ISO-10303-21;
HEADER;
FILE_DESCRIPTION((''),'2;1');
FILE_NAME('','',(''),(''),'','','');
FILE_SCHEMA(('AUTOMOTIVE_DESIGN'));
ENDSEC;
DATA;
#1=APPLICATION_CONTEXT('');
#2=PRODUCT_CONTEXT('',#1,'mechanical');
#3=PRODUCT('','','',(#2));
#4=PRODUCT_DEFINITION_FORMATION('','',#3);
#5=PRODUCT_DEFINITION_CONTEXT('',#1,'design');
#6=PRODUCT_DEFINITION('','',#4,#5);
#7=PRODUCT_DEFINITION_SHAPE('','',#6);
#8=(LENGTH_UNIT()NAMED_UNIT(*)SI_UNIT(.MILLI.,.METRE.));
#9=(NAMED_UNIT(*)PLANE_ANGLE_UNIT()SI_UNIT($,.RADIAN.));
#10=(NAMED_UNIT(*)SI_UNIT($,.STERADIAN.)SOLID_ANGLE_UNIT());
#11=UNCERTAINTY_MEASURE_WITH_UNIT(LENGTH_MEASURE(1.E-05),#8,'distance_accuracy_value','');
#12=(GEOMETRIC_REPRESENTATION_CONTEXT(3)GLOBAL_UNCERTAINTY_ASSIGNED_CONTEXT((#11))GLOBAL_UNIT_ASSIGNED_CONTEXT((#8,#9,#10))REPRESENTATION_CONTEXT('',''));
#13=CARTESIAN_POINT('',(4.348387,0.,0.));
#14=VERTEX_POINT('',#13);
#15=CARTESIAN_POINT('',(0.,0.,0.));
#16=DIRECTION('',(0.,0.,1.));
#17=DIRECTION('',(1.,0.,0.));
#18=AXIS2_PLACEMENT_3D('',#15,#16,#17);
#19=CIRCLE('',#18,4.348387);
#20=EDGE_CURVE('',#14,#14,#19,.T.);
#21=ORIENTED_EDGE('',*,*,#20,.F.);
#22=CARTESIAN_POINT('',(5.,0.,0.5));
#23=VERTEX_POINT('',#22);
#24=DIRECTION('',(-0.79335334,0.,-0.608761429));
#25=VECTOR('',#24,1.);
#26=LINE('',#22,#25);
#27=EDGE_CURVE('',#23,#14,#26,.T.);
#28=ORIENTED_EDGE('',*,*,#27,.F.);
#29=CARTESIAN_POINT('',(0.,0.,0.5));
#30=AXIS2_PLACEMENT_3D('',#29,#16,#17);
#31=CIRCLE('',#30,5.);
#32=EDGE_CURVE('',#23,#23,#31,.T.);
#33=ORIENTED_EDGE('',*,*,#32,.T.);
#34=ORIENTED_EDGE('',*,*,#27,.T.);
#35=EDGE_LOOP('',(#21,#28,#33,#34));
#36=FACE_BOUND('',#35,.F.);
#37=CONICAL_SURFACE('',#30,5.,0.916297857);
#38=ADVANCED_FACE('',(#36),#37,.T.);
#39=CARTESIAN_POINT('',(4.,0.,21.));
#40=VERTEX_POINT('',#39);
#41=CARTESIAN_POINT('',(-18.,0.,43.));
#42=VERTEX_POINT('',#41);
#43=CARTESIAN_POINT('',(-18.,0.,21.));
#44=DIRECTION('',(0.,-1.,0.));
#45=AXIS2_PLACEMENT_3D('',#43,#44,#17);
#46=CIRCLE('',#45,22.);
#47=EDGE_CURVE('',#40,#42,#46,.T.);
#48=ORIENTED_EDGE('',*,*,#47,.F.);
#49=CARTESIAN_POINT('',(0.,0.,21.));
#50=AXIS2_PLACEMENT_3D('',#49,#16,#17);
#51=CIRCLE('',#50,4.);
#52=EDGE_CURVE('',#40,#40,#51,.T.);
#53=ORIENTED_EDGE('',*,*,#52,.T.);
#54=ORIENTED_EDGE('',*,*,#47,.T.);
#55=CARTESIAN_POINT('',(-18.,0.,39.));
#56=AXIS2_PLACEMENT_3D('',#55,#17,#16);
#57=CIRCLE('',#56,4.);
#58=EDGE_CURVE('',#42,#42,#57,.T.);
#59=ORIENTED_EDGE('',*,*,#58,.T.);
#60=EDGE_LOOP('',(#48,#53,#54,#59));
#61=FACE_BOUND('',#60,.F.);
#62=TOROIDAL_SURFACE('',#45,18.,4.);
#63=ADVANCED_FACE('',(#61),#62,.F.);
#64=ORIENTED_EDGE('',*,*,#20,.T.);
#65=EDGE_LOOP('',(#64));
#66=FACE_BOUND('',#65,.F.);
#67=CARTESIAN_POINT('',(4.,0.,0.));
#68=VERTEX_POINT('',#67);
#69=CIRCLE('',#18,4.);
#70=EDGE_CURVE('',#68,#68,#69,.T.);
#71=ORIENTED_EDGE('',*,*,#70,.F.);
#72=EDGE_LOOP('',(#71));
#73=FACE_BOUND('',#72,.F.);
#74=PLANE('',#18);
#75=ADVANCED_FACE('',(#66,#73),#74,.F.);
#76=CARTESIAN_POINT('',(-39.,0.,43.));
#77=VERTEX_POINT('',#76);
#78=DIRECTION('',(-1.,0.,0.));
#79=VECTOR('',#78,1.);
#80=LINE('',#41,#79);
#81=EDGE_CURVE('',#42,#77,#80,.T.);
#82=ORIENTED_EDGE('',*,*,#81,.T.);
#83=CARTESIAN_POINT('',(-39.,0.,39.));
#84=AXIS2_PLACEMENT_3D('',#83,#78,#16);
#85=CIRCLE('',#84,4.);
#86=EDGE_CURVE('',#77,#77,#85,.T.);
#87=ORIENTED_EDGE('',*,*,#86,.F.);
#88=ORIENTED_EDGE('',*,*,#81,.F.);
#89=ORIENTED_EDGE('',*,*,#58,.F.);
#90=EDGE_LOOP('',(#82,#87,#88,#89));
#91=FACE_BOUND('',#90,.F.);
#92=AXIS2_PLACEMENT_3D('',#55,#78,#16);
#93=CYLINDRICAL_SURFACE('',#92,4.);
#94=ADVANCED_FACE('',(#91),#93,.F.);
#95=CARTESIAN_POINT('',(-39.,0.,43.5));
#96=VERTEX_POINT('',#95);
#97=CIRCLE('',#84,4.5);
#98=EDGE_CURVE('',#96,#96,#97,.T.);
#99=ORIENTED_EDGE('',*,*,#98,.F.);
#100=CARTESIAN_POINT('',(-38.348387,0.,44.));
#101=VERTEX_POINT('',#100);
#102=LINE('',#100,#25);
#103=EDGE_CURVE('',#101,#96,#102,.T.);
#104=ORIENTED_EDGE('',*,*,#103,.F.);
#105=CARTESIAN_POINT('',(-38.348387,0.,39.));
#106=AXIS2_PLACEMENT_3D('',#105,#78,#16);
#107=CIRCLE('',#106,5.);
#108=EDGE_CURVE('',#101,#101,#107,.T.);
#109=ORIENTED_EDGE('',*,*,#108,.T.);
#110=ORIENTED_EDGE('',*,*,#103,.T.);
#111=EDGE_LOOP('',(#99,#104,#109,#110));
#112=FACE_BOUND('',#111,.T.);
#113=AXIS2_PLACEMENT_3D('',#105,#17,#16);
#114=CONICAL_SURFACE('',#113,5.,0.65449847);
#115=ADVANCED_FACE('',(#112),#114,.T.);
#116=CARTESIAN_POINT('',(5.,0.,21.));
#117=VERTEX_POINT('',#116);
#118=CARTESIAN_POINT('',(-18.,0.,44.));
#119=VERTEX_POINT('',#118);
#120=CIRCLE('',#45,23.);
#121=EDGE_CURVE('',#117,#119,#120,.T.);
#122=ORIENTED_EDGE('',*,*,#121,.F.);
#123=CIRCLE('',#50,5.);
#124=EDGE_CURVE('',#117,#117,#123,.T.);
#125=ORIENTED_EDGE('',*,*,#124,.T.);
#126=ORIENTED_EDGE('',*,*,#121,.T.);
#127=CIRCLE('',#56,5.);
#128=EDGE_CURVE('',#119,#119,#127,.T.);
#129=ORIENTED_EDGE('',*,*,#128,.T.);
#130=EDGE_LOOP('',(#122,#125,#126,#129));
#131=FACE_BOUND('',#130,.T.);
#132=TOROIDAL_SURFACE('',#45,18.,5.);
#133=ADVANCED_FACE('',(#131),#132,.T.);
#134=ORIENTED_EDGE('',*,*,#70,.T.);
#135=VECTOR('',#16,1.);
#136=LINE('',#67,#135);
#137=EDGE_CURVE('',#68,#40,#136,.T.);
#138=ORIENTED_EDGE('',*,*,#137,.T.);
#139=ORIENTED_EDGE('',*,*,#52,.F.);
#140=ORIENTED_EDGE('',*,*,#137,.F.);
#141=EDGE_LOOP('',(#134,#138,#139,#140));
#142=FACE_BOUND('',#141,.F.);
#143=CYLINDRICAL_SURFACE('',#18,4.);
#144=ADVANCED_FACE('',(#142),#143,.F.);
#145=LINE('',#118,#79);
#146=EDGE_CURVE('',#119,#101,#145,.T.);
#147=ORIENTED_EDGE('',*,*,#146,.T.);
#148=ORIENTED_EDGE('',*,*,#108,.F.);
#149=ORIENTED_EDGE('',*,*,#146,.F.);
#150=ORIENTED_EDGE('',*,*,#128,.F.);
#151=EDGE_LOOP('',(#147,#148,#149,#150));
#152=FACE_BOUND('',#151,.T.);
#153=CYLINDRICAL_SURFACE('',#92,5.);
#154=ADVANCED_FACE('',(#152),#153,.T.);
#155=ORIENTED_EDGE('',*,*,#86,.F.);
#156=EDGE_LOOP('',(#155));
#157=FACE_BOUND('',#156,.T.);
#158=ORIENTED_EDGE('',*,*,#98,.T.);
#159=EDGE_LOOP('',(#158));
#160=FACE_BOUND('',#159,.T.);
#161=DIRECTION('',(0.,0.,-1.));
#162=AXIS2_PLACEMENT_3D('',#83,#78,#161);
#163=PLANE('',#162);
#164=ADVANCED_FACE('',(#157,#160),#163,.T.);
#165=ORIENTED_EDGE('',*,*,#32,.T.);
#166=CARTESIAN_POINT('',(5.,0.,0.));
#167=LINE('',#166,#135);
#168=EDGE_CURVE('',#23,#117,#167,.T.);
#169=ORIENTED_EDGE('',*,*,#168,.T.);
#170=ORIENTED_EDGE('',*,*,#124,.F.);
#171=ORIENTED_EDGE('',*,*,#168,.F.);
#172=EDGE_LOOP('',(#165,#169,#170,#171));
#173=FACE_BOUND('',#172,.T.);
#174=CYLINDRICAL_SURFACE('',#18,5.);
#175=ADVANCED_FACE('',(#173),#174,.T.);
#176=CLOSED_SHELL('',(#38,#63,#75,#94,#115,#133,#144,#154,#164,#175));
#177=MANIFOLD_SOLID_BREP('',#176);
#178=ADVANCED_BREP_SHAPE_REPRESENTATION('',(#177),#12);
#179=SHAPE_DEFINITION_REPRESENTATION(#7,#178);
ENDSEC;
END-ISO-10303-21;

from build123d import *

# Parameters (mm, degrees)
F0_R        = 5
F0_R_2      = 4
F3_C1_SIZE2 = 0.6516126864
F3_C1_SIZE  = 0.5
F3_C2_SIZE2 = 0.5
F3_C2_SIZE  = 0.6516126864


with BuildPart() as f2:
    # F2: sweep along a path in F1
    with BuildLine(Plane.XZ) as f2_path:
        Line((0, 0), (0, 21))
        ThreePointArc((0, 21), (-5.2720779386, 33.7279220614), (-18, 39))
        Line((-18, 39), (-39, 39))
    # F0 (on Top) → F2 (sweep)
    with BuildSketch(Plane.XY):
        Circle(F0_R)
        Circle(F0_R_2, mode=Mode.SUBTRACT)
    sweep(path=f2_path.line)

    # F3: chamfer of 0.5 x 0.6516126864 on 2 edges, made by hand

    # F3_c1
    f3_c1_edges = [f2.edges().sort_by_distance(p)[0] for p in [
        (-5, 0, 0),
    ]]
    f3_c1_side = f2.faces().sort_by_distance((-5, 0, 0.01))[0]
    chamfer(f3_c1_edges, length=F3_C1_SIZE, length2=F3_C1_SIZE2, reference=f3_c1_side)

    # F3_c2
    f3_c2_edges = [f2.edges().sort_by_distance(p)[0] for p in [
        (-39, 0, 34),
    ]]
    f3_c2_side = f2.faces().sort_by_distance((-38.99, 0, 34))[0]
    chamfer(f3_c2_edges, length=F3_C2_SIZE, length2=F3_C2_SIZE2, reference=f3_c2_side)


solid = f2.part
